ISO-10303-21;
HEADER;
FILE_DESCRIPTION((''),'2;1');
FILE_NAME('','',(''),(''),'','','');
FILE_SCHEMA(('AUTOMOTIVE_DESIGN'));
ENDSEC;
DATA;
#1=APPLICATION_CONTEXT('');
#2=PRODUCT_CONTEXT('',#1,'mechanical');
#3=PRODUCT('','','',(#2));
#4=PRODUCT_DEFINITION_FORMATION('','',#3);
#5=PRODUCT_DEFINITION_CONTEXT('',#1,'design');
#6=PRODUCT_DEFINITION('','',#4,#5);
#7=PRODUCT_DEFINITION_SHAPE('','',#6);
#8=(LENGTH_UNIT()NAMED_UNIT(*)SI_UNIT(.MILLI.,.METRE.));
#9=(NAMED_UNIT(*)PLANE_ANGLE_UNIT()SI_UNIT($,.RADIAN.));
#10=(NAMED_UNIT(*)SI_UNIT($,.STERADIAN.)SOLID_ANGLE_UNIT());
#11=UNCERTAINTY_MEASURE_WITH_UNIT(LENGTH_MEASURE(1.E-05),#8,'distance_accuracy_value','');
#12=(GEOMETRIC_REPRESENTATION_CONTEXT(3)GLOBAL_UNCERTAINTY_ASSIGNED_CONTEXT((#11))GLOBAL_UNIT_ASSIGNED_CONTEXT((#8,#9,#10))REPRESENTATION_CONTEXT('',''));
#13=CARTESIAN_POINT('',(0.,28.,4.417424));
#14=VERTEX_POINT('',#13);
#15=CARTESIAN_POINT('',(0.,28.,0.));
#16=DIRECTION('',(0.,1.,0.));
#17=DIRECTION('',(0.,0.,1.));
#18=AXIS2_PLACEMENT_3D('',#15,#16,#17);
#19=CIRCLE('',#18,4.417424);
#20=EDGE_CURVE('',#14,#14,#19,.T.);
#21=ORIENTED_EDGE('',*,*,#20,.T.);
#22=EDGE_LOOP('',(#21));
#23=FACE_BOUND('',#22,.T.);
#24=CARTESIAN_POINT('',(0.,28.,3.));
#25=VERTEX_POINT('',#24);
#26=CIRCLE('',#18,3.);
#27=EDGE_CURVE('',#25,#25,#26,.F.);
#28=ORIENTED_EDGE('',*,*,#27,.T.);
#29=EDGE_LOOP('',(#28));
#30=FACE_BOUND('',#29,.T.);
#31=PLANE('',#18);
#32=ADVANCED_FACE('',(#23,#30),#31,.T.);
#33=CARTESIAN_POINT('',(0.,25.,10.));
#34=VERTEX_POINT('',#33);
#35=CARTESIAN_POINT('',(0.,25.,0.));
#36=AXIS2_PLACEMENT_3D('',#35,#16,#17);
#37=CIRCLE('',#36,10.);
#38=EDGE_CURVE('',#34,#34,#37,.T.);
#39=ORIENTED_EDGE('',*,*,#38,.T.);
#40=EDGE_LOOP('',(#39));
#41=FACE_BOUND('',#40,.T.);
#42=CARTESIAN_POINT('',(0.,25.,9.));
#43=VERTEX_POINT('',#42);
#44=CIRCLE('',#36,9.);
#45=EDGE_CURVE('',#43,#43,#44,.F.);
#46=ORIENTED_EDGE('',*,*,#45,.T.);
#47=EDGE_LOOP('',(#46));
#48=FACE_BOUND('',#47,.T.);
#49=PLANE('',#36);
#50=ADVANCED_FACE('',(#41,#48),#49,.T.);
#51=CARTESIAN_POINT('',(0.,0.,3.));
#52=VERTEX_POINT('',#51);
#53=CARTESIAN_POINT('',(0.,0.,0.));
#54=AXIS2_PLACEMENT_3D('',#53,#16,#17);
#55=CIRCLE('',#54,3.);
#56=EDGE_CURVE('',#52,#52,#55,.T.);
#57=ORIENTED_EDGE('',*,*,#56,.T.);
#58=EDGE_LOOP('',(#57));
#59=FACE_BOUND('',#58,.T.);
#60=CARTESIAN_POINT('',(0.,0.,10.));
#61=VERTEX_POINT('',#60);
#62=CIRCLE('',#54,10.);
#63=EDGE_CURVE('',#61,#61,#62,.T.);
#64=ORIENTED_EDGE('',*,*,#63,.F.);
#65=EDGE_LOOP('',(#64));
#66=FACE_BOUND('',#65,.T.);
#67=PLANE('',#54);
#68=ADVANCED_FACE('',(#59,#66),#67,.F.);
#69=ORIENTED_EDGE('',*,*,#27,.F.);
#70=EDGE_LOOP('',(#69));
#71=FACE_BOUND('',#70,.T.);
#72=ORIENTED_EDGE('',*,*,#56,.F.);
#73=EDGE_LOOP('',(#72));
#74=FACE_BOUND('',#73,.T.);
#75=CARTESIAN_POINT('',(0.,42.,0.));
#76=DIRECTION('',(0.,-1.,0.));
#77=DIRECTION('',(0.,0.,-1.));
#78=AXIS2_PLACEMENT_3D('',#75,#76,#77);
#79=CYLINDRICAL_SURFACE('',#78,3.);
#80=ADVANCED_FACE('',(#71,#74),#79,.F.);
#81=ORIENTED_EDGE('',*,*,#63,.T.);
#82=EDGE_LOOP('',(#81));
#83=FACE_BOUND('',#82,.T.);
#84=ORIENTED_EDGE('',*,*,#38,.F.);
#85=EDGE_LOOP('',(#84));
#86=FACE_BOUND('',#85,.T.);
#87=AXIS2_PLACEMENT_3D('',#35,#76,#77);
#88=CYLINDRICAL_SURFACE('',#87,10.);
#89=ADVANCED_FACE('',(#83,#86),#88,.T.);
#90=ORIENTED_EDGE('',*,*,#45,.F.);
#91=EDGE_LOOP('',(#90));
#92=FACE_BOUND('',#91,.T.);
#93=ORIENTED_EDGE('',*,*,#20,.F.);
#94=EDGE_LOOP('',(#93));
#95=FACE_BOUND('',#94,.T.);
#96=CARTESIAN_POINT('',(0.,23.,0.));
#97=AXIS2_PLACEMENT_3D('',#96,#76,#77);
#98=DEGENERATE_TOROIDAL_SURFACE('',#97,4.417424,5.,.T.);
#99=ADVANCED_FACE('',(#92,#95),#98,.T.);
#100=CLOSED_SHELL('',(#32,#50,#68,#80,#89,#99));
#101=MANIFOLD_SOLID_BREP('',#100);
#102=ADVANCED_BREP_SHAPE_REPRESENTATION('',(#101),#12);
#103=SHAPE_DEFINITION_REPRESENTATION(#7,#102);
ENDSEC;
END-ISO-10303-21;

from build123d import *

# Parameters (mm, degrees)
SKETCH1_R           = 10
BOSS_EXTRUDE2_DEPTH = 25
SKETCH2_R           = 9
BOSS_EXTRUDE3_DEPTH = 28
SKETCH3_R           = 3
CUT_EXTRUDE1_DEPTH  = 42
FILLET2_R           = 5


with BuildPart() as part:
    # Sketch1 → Boss-Extrude2 (new body)
    with BuildSketch(Plane(origin=(0, 0, 0), x_dir=(1, 0, 0), z_dir=(0, 1, 0))):
        with Locations(Location((0, 0, 0), (0, 0, 270))):
            Circle(SKETCH1_R)
    extrude(amount=BOSS_EXTRUDE2_DEPTH)

    # Sketch2 → Boss-Extrude3 (add)
    with BuildSketch(Plane(origin=(0, 0, 0), x_dir=(1, 0, 0), z_dir=(0, 1, 0))):
        with Locations(Location((0, 0, 0), (0, 0, 270))):
            Circle(SKETCH2_R)
    extrude(amount=BOSS_EXTRUDE3_DEPTH)

    # Sketch3 → Cut-Extrude1 (cut)
    with BuildSketch(Plane(origin=(0, 0, 0), x_dir=(1, 0, 0), z_dir=(0, 1, 0))):
        with Locations(Location((0, 0, 0), (0, 0, 270))):
            Circle(SKETCH3_R)
    extrude(amount=CUT_EXTRUDE1_DEPTH, mode=Mode.SUBTRACT)

    # Fillet2
    # the kernel refuses this fillet: 5 mm, written as the material it takes off along each edge
    with BuildSketch(Plane(origin=(0, 28, 0), x_dir=(0, 0, 1), z_dir=(-1, 0, 0))) as fillet2_piece_1:
        with BuildLine():
            CenterArc((4.417424305, -5), FILLET2_R, 23.578178478, 66.421821522)
            Line((4.417424305, 0), (4.417424305, 0.1))
            Line((4.417424305, 0.1), (9, 0.1))
            Line((9, 0.1), (9.1, 0))
            ThreePointArc((9.1, 0), (9.1, -1.5), (9.091651514, -2.96))
            Line((9.091651514, -2.96), (9, -3))
        make_face()
    revolve(axis=Axis((0, 28, 0), (0, 1, 0)), mode=Mode.SUBTRACT)


solid = part.part
